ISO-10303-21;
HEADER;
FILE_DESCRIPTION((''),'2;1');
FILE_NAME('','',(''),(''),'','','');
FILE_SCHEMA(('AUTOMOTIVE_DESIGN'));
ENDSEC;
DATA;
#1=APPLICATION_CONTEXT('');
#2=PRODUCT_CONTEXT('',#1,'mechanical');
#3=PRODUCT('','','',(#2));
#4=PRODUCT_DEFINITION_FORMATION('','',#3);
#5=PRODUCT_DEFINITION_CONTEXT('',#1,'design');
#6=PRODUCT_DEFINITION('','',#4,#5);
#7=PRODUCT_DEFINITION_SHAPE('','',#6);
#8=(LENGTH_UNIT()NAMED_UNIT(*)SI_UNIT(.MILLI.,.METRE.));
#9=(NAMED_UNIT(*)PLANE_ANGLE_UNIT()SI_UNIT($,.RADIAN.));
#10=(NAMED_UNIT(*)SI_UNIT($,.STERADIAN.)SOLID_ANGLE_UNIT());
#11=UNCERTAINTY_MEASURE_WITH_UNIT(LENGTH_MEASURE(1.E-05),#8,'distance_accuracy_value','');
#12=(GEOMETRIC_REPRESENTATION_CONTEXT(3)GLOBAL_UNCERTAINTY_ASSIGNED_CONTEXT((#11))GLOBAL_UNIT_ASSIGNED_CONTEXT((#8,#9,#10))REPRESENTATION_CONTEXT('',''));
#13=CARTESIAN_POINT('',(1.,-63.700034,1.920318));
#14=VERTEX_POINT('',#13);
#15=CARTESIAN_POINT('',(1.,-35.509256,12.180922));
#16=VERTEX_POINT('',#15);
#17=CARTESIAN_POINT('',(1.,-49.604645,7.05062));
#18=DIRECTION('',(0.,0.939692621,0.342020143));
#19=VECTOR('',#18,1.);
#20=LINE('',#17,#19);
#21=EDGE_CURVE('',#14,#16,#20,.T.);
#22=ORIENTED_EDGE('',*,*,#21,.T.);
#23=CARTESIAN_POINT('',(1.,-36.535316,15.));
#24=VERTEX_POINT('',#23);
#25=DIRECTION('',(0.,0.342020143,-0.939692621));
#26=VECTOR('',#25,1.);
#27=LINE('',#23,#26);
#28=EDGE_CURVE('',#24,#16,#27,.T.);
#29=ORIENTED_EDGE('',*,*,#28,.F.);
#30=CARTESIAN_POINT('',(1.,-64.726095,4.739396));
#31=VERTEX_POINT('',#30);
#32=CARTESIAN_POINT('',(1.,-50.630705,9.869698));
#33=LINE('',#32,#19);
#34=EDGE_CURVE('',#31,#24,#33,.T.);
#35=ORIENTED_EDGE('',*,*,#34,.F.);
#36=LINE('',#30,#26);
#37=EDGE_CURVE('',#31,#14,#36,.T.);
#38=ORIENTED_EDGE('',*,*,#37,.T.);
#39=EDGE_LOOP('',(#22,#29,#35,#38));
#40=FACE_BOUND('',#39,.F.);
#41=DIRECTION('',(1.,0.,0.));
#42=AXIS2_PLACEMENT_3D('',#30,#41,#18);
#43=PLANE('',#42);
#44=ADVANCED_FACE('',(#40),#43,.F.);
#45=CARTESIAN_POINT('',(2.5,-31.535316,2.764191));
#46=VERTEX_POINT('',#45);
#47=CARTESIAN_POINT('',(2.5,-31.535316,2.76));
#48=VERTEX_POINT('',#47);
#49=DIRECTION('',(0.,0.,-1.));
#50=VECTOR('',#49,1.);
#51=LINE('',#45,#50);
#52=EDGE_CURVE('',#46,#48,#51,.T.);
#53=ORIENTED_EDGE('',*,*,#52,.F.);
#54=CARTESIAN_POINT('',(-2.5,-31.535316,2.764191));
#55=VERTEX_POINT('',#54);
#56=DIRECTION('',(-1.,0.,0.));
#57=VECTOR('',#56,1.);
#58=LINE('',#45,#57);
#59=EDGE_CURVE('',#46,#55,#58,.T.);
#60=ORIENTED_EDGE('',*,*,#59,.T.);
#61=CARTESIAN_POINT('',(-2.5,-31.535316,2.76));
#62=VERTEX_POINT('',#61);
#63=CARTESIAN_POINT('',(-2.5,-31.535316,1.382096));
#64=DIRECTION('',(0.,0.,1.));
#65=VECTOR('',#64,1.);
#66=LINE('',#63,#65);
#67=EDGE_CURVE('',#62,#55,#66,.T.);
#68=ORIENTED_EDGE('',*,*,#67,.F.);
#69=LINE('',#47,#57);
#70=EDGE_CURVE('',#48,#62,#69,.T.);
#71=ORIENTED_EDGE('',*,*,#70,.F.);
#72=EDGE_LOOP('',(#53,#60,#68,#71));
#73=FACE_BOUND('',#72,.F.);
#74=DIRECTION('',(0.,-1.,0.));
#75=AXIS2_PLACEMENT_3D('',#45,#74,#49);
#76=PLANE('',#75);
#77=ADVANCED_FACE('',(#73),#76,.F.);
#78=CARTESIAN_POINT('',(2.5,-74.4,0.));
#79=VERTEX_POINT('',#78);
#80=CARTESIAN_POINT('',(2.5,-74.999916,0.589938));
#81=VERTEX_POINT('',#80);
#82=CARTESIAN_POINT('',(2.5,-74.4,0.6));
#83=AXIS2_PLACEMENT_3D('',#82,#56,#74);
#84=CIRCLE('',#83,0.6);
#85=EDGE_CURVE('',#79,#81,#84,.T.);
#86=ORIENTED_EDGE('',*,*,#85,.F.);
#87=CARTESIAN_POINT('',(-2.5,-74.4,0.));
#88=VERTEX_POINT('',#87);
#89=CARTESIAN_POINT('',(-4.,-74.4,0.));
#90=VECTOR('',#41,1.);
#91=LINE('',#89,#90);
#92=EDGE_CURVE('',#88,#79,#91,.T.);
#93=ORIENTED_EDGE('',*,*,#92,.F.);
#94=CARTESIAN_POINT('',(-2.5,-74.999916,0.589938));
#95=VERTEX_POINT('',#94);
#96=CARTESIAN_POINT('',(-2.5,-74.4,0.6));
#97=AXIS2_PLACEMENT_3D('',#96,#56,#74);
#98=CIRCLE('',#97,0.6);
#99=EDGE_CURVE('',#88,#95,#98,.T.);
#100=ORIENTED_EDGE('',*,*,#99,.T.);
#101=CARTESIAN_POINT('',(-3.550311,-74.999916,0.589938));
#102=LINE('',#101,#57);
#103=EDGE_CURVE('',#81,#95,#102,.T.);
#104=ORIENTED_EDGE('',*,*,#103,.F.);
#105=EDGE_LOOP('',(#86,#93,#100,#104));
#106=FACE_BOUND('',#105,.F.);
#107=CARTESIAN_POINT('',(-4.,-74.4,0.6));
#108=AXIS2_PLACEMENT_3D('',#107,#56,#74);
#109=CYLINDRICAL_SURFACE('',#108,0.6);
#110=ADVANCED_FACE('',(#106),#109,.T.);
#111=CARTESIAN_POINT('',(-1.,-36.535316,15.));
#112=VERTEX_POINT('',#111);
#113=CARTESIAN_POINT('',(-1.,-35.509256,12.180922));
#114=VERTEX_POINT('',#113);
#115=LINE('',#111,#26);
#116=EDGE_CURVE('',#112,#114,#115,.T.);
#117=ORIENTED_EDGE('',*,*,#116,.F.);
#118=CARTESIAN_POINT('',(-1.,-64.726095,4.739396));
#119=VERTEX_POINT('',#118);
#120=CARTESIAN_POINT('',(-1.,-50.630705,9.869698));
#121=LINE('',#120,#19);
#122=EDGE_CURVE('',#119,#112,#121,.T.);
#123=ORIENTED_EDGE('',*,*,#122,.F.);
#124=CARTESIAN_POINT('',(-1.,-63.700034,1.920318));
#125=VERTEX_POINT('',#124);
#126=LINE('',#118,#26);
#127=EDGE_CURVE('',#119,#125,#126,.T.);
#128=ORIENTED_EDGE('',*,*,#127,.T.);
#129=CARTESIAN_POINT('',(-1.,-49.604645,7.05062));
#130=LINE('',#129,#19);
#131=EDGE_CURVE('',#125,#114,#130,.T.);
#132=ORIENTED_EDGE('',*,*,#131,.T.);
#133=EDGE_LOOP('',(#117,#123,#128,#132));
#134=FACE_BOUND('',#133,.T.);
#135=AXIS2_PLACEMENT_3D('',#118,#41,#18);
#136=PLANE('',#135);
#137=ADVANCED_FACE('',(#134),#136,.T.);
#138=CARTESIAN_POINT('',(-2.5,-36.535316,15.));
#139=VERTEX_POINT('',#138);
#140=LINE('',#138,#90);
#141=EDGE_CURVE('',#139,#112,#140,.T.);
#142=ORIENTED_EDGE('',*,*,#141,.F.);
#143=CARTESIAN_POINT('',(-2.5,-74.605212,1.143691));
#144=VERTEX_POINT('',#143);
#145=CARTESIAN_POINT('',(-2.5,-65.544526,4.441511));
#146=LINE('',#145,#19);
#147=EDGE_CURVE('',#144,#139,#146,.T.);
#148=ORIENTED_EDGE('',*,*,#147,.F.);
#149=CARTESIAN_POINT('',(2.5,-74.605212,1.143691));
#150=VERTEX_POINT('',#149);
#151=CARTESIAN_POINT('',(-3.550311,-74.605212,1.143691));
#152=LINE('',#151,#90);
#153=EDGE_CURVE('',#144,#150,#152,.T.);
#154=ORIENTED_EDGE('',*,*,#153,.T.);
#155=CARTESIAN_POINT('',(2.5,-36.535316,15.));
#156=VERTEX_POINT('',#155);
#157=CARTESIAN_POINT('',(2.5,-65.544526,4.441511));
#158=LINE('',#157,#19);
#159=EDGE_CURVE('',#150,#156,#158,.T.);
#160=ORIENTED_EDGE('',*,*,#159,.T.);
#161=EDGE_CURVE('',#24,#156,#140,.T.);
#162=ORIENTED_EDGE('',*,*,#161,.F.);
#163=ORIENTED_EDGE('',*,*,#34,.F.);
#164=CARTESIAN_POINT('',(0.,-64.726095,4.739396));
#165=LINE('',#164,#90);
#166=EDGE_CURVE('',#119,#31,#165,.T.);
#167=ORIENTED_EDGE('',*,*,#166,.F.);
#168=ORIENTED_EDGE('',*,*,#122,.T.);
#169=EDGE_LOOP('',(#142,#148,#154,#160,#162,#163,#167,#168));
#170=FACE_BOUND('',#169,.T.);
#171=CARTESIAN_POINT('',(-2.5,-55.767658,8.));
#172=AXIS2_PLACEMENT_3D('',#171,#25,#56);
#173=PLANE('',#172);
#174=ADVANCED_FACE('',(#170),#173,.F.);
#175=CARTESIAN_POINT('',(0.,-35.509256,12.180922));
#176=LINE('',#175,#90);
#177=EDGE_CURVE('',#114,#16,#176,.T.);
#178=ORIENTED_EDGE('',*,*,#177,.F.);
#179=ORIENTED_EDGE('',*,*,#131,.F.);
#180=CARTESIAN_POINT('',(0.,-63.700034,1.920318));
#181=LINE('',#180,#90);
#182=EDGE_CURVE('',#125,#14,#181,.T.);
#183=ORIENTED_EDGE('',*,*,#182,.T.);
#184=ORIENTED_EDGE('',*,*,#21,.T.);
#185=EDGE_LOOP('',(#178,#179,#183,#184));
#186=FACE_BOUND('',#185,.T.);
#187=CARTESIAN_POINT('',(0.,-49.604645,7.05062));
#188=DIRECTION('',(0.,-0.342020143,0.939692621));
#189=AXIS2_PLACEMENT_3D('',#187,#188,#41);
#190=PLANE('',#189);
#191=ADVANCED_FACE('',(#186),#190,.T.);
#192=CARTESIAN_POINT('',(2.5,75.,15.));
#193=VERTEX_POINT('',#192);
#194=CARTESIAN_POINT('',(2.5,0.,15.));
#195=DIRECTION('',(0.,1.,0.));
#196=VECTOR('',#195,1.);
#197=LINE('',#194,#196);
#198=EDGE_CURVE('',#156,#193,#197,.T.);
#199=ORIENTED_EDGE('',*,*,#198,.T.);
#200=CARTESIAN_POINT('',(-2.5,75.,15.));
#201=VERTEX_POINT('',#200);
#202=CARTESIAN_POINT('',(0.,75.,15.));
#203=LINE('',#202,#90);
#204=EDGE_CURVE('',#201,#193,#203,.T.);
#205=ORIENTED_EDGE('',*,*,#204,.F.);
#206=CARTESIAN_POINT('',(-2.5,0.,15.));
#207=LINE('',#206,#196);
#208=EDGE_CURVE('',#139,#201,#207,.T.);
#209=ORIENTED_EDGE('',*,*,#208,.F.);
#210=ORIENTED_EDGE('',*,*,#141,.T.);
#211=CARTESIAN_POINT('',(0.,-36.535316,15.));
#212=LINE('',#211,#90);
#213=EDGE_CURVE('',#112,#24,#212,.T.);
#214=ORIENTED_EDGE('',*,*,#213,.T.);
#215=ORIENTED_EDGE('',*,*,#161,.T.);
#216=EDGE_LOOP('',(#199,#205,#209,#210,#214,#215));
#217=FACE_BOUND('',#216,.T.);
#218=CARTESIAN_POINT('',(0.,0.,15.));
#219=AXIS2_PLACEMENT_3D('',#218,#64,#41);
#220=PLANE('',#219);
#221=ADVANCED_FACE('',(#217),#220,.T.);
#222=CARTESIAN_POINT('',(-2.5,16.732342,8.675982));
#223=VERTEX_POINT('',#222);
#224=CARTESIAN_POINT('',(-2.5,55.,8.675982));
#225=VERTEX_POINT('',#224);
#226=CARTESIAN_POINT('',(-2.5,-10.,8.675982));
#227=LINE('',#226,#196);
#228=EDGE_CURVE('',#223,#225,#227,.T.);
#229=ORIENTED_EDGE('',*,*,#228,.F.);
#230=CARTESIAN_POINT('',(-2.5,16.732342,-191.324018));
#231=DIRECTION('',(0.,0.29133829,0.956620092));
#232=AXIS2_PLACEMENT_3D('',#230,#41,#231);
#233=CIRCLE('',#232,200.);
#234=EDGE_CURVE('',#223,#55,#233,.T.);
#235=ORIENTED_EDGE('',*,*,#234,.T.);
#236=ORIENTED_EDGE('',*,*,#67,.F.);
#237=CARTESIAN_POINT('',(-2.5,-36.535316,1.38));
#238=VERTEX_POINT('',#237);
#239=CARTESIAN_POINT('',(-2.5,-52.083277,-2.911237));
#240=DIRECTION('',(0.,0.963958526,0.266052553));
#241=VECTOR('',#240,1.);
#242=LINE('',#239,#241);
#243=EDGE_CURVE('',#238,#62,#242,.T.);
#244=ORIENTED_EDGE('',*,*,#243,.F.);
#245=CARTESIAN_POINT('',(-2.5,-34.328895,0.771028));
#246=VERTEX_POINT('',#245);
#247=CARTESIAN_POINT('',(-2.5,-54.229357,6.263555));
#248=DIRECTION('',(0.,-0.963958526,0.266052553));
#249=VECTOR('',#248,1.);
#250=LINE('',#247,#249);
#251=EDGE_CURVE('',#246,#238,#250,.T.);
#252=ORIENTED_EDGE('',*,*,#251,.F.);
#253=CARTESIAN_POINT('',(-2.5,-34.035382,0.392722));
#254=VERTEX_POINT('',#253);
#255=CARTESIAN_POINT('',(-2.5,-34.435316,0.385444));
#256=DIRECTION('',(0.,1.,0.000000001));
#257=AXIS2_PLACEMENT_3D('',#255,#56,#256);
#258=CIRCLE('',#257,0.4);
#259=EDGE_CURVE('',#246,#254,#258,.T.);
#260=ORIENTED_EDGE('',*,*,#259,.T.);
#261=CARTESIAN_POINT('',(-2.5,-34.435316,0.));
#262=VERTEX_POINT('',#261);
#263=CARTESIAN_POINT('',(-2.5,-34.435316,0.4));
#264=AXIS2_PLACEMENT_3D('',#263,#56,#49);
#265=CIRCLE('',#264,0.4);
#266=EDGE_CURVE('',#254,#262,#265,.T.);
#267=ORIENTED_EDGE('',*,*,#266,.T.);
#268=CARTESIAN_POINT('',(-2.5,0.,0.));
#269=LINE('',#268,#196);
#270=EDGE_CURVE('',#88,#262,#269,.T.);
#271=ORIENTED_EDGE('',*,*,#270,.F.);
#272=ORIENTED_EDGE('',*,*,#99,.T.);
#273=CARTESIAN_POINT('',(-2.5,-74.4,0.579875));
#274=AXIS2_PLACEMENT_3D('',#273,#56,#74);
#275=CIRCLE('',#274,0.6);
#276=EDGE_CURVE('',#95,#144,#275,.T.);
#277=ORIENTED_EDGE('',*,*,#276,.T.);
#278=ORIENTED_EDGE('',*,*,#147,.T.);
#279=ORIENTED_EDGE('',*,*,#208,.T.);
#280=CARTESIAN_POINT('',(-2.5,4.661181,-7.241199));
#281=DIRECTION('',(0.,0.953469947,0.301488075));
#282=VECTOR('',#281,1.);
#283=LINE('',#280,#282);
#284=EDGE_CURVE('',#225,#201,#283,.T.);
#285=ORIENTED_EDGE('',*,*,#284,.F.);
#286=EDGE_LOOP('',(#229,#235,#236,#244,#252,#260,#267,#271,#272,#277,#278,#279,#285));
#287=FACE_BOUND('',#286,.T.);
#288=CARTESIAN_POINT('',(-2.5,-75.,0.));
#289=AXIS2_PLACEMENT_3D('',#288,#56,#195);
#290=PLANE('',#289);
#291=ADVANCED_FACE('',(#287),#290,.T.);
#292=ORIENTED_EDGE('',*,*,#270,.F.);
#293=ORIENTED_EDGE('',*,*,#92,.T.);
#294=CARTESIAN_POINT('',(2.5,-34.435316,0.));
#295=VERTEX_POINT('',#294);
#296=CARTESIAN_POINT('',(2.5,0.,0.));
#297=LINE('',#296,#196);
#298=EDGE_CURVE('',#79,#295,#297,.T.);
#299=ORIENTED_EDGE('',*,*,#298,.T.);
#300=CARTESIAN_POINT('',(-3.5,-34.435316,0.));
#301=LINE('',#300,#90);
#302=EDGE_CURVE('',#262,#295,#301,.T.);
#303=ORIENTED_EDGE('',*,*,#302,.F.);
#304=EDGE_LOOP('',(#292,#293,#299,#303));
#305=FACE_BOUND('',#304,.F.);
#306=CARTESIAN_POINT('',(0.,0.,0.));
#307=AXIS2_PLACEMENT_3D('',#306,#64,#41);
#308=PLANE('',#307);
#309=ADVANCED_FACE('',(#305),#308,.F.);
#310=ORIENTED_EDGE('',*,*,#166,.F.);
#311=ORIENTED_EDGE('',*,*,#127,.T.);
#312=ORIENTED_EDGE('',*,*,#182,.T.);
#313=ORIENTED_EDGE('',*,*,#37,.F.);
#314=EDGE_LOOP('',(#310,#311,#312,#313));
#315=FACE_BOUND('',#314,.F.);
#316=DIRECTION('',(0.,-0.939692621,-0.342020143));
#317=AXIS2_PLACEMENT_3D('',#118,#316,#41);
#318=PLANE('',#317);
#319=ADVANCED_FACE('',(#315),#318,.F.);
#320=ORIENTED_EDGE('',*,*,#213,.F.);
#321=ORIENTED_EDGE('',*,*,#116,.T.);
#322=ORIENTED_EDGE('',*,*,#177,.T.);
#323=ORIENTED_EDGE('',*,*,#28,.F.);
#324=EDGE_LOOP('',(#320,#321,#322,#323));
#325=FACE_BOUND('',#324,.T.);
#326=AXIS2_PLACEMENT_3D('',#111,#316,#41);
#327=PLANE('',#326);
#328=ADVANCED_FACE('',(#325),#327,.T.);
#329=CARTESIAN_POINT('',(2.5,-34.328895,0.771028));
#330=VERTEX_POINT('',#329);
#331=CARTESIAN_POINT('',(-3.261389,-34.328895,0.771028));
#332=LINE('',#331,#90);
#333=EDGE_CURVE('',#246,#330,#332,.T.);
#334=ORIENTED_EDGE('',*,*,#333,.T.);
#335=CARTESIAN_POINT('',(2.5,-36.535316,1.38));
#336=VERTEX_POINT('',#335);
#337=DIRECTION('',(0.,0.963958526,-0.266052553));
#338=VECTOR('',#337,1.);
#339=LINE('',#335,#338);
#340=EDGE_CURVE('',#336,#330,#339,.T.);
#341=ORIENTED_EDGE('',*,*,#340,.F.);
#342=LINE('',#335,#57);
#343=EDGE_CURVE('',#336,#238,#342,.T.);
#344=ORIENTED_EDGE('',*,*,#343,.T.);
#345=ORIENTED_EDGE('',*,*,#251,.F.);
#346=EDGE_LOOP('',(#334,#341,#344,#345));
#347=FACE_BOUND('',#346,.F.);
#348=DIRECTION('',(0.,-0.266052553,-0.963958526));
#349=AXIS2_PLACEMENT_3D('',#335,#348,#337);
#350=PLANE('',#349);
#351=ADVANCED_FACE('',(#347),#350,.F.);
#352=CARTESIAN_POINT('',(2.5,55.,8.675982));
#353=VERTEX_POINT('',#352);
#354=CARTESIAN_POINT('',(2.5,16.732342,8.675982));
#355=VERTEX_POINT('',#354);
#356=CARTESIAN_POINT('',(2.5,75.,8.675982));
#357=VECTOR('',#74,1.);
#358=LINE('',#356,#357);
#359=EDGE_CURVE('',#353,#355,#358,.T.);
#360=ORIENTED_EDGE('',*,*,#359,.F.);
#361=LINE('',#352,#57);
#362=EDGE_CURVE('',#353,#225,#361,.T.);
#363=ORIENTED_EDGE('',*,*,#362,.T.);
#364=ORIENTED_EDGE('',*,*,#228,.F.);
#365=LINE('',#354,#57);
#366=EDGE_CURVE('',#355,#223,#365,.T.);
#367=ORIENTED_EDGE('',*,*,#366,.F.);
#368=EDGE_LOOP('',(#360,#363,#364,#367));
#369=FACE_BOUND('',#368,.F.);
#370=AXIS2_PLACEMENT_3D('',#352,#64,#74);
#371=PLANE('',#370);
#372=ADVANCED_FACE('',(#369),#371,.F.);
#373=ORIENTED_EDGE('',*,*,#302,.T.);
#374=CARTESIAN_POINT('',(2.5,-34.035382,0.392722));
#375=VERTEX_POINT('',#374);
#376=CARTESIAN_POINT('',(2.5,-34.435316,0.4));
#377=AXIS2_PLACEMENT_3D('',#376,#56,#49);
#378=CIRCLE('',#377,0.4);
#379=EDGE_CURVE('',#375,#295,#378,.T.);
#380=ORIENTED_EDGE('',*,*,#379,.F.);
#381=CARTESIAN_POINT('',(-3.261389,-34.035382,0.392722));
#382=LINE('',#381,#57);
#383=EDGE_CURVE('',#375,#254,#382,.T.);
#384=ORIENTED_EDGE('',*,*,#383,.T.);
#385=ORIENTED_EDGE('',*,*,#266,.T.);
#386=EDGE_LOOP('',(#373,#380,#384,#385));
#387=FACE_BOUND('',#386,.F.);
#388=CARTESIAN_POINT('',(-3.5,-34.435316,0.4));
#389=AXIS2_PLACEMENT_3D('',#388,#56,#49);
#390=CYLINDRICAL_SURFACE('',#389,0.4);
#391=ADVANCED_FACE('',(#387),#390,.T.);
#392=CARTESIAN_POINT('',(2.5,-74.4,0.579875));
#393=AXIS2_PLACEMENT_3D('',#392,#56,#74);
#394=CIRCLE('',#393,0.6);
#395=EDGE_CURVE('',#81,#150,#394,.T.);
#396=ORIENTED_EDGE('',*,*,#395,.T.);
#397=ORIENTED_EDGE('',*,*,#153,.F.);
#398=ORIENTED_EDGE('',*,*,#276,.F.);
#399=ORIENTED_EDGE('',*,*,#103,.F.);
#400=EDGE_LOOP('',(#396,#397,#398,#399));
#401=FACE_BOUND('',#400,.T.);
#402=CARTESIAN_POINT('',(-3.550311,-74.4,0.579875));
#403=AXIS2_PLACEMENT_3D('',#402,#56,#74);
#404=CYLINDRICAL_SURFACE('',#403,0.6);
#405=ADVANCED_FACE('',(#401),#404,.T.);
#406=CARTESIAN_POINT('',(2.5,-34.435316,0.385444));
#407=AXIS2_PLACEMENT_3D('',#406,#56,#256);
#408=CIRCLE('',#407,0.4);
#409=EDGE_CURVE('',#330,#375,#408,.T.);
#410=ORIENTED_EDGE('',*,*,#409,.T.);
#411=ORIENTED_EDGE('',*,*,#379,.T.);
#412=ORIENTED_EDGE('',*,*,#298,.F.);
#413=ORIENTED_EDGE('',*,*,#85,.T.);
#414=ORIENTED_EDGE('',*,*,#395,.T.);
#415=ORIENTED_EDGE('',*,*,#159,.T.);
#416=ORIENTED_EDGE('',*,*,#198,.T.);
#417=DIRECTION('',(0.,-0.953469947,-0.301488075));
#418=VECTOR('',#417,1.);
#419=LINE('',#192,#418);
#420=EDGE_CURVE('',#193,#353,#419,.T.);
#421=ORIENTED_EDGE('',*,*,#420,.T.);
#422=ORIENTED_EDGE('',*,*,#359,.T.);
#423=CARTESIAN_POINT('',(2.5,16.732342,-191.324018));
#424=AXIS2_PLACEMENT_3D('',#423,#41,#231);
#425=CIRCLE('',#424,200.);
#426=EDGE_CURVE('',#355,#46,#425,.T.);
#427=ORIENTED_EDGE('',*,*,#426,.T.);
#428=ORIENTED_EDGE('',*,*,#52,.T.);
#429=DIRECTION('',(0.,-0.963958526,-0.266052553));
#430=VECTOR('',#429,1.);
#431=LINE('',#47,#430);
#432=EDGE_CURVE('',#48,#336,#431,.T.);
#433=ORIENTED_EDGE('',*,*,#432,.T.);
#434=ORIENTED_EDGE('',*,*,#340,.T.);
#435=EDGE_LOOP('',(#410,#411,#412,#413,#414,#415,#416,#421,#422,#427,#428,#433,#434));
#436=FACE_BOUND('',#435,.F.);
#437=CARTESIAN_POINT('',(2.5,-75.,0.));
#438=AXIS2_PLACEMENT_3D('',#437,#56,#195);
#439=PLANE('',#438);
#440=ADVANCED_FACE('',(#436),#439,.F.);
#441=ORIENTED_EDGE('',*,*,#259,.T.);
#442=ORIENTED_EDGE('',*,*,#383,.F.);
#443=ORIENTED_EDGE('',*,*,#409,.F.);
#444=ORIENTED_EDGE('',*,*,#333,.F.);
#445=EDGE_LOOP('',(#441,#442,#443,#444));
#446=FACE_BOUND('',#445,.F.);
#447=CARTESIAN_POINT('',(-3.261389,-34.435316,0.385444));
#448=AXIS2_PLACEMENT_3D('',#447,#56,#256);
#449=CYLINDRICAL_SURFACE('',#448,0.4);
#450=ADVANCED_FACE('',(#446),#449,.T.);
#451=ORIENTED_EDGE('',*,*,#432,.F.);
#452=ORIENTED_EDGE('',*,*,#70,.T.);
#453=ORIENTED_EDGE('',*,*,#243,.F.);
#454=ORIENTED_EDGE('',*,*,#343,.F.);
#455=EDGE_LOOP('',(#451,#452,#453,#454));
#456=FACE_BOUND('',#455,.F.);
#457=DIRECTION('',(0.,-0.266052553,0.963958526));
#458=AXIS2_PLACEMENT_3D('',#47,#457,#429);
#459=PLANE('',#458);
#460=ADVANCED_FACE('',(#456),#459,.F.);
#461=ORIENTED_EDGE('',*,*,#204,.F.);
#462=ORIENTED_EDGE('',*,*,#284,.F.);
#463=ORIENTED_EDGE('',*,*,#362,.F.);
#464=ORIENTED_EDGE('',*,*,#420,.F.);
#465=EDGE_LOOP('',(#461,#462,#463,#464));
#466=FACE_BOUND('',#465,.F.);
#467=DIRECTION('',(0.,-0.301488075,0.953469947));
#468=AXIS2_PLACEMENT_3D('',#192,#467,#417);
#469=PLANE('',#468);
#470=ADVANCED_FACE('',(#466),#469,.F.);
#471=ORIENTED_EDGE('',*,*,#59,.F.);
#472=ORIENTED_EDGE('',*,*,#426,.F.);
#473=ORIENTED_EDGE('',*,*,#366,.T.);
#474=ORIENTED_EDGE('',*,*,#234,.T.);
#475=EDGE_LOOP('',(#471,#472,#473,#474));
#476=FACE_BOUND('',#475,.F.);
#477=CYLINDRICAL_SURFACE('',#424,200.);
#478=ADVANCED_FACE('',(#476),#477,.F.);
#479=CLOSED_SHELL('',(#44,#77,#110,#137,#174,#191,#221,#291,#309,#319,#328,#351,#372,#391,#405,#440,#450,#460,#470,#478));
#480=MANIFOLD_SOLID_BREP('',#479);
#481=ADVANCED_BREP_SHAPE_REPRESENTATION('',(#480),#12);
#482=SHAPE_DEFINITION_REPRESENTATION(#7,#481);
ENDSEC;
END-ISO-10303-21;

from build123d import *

# Parameters (mm, degrees)
F0_W        = 5
F0_H        = 150
F1_DEPTH    = 15
F2_SIZE2    = 38.4646838724
F2_SIZE     = 14
F3_T1_DEPTH = 7.1006226146
F3_T3_DEPTH = 8
F5_DEPTH    = 25
F6_T1_DEPTH = 6.5227780604
F6_T3_DEPTH = 7
F7_W        = 2
F7_H        = 30
F8_DEPTH    = 3


# Not quite as in the source:
# - a fillet or chamfer that OpenCascade refuses, or shapes differently, is made with other operations: its cross-section is extruded or revolved along the edge and cut away or added


with BuildPart() as f1:
    # F0 (on Top) → F1 (new body)
    with BuildSketch(Plane.XY):
        Rectangle(F0_W, F0_H)
    extrude(amount=F1_DEPTH)

    # F2
    f2_edges = [f1.edges().sort_by_distance(p)[0] for p in [
        (0, -75, 15),
    ]]
    f2_side = f1.faces().sort_by_distance((0, -75, 7.5))[0]
    chamfer(f2_edges, length=F2_SIZE, length2=F2_SIZE2, reference=f2_side)

    # F3: fillet of radius 0.6 on 2 edges, made by hand

    # F3_s2 → F3_t1 (cut)
    with BuildSketch(Plane.YZ.offset(-3.5503113073)):
        with BuildLine():
            ThreePointArc((-75, 0.5798754771), (-74.8914912266, 0.9240213389), (-74.605212086, 1.1436910495))
            Line((-74.605212086, 1.1436910495), (-75, 1))
            Line((-75, 1), (-75, 0.5798754771))
        make_face()
    extrude(amount=F3_T1_DEPTH, mode=Mode.SUBTRACT)

    # F3_s4 → F3_t3 (cut)
    with BuildSketch(Plane.YZ.offset(-4)):
        with BuildLine():
            ThreePointArc((-75, 0.6), (-74.8242640687, 0.1757359313), (-74.4, 0))
            Line((-74.4, 0), (-75, 0))
            Line((-75, 0), (-75, 0.6))
        make_face()
    extrude(amount=F3_T3_DEPTH, mode=Mode.SUBTRACT)

    # F4 (on face) → F5 (cut)
    with BuildSketch(Plane.YZ.offset(2.5)):
        Polygon((55, 8.6759815816), (75, 8.6759815816), (75, 15), align=None)
        with BuildLine():
            ThreePointArc((16.7323419362, 8.6759815816), (46.1873611716, 6.4950955262), (75, 0))
            Line((75, 0), (75, 8.6759815816))
            Line((75, 8.6759815816), (55, 8.6759815816))
            Line((55, 8.6759815816), (16.7323419362, 8.6759815816))
        make_face()
        with BuildLine():
            Line((-31.5353161276, 0), (75, 0))
            ThreePointArc((75, 0), (46.1873611716, 6.4950955262), (16.7323419362, 8.6759815816))
            ThreePointArc((16.7323419362, 8.6759815816), (-7.5818312879, 7.1925324796), (-31.5353161276, 2.7641913859))
            Line((-31.5353161276, 2.7641913859), (-31.5353161276, 2.76))
            Line((-31.5353161276, 2.76), (-31.5353161276, 0))
        make_face()
        Polygon((-34.0353161276, 0.69), (-31.5353161276, 0), (-31.5353161276, 2.76), (-36.5353161276, 1.38), align=None)
        Polygon((-34.0353161276, 0), (-31.5353161276, 0), (-34.0353161276, 0.69), align=None)
    extrude(amount=-F5_DEPTH, mode=Mode.SUBTRACT)

    # F6: fillet of radius 0.4 on 2 edges, made by hand

    # F6_s2 → F6_t1 (cut)
    with BuildSketch(Plane.YZ.offset(-3.2613890302)):
        with BuildLine():
            ThreePointArc((-34.0353161276, 0.3854443879), (-34.1170643339, 0.6277578125), (-34.3288951064, 0.7710277981))
            Line((-34.3288951064, 0.7710277981), (-34.0353161276, 0.69))
            Line((-34.0353161276, 0.69), (-34.0353161276, 0.3854443879))
        make_face()
    extrude(amount=F6_T1_DEPTH, mode=Mode.SUBTRACT)

    # F6_s4 → F6_t3 (cut)
    with BuildSketch(Plane.YZ.offset(-3.5)):
        with BuildLine():
            ThreePointArc((-34.4353161276, 0), (-34.1524734152, 0.1171572875), (-34.0353161276, 0.4))
            Line((-34.0353161276, 0.4), (-34.0353161276, 0))
            Line((-34.0353161276, 0), (-34.4353161276, 0))
        make_face()
    extrude(amount=F6_T3_DEPTH, mode=Mode.SUBTRACT)

    # F7 (on face) → F8 (cut)
    with BuildSketch(Plane(origin=(0, -9.0947271879, 24.9875575848), x_dir=(1, 0, 0), z_dir=(0, -0.3420201433, 0.9396926208))):
        with Locations((0, -44.2016648133)):
            Rectangle(F7_W, F7_H)
    extrude(amount=-F8_DEPTH, mode=Mode.SUBTRACT)


solid = f1.part
